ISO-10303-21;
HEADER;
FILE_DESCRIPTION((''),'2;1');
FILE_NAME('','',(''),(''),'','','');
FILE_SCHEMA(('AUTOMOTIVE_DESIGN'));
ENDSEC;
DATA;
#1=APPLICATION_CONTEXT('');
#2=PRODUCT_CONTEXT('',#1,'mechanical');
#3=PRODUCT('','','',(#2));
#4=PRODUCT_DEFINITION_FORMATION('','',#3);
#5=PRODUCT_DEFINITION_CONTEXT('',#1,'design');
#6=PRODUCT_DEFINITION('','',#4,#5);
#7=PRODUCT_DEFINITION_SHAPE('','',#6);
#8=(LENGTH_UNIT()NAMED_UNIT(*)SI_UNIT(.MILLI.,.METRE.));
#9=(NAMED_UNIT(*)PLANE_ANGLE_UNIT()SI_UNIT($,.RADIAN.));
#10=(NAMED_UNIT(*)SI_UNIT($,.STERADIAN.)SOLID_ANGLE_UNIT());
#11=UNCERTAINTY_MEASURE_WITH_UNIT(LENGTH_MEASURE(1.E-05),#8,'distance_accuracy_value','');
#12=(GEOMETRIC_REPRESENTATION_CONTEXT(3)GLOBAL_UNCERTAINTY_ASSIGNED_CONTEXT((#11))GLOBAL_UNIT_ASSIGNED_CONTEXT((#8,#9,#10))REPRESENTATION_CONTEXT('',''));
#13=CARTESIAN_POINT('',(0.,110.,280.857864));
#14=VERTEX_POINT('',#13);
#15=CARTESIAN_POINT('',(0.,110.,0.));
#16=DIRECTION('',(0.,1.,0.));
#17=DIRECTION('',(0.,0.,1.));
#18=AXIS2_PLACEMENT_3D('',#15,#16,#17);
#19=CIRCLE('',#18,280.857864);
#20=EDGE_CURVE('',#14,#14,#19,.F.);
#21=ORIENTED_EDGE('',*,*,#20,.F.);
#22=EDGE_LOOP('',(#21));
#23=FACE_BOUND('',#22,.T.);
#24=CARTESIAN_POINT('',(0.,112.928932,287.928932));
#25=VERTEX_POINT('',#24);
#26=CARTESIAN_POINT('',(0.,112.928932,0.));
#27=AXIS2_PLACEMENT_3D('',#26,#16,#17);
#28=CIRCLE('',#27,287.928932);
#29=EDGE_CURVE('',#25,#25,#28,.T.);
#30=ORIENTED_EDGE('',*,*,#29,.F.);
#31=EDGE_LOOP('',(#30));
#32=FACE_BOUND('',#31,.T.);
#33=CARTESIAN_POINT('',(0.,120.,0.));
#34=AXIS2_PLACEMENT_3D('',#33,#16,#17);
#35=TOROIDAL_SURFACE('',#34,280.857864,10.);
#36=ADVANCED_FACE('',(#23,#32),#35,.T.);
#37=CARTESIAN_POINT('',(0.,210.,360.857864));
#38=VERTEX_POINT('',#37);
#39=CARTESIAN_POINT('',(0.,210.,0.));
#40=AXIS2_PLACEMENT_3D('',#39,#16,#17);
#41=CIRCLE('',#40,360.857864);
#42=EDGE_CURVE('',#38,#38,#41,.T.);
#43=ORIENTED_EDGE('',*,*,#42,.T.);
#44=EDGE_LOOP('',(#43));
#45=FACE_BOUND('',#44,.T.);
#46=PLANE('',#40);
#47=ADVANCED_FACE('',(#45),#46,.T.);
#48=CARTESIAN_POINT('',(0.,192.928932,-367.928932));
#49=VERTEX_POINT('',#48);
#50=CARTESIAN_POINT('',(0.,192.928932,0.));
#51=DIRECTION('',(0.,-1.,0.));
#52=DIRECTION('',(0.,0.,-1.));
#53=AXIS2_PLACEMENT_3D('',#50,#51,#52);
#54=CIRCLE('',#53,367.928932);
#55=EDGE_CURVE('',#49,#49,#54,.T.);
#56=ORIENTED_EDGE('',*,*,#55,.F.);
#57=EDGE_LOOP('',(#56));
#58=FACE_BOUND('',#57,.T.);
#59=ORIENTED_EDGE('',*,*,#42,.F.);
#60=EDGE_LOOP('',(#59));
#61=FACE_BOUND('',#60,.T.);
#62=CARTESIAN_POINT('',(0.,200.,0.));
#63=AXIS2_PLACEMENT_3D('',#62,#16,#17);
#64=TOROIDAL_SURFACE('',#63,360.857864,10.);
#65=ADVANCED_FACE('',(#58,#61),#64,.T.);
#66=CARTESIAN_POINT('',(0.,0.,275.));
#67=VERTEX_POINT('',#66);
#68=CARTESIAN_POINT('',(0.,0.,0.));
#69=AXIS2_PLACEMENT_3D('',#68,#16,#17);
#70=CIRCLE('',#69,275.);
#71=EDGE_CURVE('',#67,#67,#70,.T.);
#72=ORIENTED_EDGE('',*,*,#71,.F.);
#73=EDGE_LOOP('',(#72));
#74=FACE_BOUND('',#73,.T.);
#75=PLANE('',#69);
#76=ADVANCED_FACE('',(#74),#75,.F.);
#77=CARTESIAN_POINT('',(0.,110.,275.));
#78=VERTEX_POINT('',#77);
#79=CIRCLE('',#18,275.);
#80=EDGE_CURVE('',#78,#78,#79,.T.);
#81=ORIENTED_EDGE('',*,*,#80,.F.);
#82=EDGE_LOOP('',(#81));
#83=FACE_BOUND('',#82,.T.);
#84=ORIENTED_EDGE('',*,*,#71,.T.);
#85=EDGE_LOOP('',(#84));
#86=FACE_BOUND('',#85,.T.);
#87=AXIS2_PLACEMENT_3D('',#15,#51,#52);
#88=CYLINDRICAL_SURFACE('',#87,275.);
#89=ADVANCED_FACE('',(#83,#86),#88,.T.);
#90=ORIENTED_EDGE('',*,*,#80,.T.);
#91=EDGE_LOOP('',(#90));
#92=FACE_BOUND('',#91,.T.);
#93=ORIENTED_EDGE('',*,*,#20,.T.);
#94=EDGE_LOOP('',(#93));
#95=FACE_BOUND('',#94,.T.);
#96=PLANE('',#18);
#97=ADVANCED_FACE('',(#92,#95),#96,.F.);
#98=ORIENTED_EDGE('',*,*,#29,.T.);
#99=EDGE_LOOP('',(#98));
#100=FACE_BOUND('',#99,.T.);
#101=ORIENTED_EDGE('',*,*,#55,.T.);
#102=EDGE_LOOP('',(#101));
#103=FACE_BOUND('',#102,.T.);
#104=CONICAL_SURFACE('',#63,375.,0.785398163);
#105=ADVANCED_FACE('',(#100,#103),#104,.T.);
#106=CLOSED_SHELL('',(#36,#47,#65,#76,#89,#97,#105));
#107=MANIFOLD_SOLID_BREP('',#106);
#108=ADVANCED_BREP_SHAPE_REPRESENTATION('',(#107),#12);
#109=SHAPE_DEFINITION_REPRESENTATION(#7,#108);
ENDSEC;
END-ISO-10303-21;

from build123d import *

# Parameters (mm, degrees)
SKETCH1_R           = 275
BOSS_EXTRUDE1_DEPTH = 110
SKETCH2_R           = 375
BOSS_EXTRUDE2_DEPTH = 100
CHAMFER1_SIZE       = 90
FILLET1_R           = 10
FILLET2_R           = 10


with BuildPart() as part:
    # Sketch1 → Boss-Extrude1 (new body)
    with BuildSketch(Plane(origin=(0, 0, 0), x_dir=(1, 0, 0), z_dir=(0, 1, 0))):
        with Locations(Location((0, 0, 0), (0, 0, 270))):
            Circle(SKETCH1_R)
    extrude(amount=BOSS_EXTRUDE1_DEPTH)

    # Sketch2 → Boss-Extrude2 (add)
    with BuildSketch(Plane(origin=(0, 110, 0), x_dir=(1, 0, 0), z_dir=(0, 1, 0))):
        with Locations(Location((0, 0, 0), (0, 0, 270))):
            Circle(SKETCH2_R)
    extrude(amount=BOSS_EXTRUDE2_DEPTH)

    # Chamfer1
    chamfer1_edges = [part.edges().sort_by_distance(p)[0] for p in [
        (0, 110, -375),
    ]]
    chamfer(chamfer1_edges, length=CHAMFER1_SIZE)

    # Fillet1
    fillet1_edges = [part.edges().sort_by_distance(p)[0] for p in [
        (0, 110, -285),
        (0, 210, -375),
    ]]
    fillet(fillet1_edges, radius=FILLET1_R - 0.0001)  # a hair under: the kernel refuses the full size

    # Fillet2
    fillet2_edges = [part.edges().sort_by_distance(p)[0] for p in [
        (0, 200, -375),
    ]]
    fillet(fillet2_edges, radius=FILLET2_R - 0.0004)  # a hair under: the kernel refuses the full size


solid = part.part
